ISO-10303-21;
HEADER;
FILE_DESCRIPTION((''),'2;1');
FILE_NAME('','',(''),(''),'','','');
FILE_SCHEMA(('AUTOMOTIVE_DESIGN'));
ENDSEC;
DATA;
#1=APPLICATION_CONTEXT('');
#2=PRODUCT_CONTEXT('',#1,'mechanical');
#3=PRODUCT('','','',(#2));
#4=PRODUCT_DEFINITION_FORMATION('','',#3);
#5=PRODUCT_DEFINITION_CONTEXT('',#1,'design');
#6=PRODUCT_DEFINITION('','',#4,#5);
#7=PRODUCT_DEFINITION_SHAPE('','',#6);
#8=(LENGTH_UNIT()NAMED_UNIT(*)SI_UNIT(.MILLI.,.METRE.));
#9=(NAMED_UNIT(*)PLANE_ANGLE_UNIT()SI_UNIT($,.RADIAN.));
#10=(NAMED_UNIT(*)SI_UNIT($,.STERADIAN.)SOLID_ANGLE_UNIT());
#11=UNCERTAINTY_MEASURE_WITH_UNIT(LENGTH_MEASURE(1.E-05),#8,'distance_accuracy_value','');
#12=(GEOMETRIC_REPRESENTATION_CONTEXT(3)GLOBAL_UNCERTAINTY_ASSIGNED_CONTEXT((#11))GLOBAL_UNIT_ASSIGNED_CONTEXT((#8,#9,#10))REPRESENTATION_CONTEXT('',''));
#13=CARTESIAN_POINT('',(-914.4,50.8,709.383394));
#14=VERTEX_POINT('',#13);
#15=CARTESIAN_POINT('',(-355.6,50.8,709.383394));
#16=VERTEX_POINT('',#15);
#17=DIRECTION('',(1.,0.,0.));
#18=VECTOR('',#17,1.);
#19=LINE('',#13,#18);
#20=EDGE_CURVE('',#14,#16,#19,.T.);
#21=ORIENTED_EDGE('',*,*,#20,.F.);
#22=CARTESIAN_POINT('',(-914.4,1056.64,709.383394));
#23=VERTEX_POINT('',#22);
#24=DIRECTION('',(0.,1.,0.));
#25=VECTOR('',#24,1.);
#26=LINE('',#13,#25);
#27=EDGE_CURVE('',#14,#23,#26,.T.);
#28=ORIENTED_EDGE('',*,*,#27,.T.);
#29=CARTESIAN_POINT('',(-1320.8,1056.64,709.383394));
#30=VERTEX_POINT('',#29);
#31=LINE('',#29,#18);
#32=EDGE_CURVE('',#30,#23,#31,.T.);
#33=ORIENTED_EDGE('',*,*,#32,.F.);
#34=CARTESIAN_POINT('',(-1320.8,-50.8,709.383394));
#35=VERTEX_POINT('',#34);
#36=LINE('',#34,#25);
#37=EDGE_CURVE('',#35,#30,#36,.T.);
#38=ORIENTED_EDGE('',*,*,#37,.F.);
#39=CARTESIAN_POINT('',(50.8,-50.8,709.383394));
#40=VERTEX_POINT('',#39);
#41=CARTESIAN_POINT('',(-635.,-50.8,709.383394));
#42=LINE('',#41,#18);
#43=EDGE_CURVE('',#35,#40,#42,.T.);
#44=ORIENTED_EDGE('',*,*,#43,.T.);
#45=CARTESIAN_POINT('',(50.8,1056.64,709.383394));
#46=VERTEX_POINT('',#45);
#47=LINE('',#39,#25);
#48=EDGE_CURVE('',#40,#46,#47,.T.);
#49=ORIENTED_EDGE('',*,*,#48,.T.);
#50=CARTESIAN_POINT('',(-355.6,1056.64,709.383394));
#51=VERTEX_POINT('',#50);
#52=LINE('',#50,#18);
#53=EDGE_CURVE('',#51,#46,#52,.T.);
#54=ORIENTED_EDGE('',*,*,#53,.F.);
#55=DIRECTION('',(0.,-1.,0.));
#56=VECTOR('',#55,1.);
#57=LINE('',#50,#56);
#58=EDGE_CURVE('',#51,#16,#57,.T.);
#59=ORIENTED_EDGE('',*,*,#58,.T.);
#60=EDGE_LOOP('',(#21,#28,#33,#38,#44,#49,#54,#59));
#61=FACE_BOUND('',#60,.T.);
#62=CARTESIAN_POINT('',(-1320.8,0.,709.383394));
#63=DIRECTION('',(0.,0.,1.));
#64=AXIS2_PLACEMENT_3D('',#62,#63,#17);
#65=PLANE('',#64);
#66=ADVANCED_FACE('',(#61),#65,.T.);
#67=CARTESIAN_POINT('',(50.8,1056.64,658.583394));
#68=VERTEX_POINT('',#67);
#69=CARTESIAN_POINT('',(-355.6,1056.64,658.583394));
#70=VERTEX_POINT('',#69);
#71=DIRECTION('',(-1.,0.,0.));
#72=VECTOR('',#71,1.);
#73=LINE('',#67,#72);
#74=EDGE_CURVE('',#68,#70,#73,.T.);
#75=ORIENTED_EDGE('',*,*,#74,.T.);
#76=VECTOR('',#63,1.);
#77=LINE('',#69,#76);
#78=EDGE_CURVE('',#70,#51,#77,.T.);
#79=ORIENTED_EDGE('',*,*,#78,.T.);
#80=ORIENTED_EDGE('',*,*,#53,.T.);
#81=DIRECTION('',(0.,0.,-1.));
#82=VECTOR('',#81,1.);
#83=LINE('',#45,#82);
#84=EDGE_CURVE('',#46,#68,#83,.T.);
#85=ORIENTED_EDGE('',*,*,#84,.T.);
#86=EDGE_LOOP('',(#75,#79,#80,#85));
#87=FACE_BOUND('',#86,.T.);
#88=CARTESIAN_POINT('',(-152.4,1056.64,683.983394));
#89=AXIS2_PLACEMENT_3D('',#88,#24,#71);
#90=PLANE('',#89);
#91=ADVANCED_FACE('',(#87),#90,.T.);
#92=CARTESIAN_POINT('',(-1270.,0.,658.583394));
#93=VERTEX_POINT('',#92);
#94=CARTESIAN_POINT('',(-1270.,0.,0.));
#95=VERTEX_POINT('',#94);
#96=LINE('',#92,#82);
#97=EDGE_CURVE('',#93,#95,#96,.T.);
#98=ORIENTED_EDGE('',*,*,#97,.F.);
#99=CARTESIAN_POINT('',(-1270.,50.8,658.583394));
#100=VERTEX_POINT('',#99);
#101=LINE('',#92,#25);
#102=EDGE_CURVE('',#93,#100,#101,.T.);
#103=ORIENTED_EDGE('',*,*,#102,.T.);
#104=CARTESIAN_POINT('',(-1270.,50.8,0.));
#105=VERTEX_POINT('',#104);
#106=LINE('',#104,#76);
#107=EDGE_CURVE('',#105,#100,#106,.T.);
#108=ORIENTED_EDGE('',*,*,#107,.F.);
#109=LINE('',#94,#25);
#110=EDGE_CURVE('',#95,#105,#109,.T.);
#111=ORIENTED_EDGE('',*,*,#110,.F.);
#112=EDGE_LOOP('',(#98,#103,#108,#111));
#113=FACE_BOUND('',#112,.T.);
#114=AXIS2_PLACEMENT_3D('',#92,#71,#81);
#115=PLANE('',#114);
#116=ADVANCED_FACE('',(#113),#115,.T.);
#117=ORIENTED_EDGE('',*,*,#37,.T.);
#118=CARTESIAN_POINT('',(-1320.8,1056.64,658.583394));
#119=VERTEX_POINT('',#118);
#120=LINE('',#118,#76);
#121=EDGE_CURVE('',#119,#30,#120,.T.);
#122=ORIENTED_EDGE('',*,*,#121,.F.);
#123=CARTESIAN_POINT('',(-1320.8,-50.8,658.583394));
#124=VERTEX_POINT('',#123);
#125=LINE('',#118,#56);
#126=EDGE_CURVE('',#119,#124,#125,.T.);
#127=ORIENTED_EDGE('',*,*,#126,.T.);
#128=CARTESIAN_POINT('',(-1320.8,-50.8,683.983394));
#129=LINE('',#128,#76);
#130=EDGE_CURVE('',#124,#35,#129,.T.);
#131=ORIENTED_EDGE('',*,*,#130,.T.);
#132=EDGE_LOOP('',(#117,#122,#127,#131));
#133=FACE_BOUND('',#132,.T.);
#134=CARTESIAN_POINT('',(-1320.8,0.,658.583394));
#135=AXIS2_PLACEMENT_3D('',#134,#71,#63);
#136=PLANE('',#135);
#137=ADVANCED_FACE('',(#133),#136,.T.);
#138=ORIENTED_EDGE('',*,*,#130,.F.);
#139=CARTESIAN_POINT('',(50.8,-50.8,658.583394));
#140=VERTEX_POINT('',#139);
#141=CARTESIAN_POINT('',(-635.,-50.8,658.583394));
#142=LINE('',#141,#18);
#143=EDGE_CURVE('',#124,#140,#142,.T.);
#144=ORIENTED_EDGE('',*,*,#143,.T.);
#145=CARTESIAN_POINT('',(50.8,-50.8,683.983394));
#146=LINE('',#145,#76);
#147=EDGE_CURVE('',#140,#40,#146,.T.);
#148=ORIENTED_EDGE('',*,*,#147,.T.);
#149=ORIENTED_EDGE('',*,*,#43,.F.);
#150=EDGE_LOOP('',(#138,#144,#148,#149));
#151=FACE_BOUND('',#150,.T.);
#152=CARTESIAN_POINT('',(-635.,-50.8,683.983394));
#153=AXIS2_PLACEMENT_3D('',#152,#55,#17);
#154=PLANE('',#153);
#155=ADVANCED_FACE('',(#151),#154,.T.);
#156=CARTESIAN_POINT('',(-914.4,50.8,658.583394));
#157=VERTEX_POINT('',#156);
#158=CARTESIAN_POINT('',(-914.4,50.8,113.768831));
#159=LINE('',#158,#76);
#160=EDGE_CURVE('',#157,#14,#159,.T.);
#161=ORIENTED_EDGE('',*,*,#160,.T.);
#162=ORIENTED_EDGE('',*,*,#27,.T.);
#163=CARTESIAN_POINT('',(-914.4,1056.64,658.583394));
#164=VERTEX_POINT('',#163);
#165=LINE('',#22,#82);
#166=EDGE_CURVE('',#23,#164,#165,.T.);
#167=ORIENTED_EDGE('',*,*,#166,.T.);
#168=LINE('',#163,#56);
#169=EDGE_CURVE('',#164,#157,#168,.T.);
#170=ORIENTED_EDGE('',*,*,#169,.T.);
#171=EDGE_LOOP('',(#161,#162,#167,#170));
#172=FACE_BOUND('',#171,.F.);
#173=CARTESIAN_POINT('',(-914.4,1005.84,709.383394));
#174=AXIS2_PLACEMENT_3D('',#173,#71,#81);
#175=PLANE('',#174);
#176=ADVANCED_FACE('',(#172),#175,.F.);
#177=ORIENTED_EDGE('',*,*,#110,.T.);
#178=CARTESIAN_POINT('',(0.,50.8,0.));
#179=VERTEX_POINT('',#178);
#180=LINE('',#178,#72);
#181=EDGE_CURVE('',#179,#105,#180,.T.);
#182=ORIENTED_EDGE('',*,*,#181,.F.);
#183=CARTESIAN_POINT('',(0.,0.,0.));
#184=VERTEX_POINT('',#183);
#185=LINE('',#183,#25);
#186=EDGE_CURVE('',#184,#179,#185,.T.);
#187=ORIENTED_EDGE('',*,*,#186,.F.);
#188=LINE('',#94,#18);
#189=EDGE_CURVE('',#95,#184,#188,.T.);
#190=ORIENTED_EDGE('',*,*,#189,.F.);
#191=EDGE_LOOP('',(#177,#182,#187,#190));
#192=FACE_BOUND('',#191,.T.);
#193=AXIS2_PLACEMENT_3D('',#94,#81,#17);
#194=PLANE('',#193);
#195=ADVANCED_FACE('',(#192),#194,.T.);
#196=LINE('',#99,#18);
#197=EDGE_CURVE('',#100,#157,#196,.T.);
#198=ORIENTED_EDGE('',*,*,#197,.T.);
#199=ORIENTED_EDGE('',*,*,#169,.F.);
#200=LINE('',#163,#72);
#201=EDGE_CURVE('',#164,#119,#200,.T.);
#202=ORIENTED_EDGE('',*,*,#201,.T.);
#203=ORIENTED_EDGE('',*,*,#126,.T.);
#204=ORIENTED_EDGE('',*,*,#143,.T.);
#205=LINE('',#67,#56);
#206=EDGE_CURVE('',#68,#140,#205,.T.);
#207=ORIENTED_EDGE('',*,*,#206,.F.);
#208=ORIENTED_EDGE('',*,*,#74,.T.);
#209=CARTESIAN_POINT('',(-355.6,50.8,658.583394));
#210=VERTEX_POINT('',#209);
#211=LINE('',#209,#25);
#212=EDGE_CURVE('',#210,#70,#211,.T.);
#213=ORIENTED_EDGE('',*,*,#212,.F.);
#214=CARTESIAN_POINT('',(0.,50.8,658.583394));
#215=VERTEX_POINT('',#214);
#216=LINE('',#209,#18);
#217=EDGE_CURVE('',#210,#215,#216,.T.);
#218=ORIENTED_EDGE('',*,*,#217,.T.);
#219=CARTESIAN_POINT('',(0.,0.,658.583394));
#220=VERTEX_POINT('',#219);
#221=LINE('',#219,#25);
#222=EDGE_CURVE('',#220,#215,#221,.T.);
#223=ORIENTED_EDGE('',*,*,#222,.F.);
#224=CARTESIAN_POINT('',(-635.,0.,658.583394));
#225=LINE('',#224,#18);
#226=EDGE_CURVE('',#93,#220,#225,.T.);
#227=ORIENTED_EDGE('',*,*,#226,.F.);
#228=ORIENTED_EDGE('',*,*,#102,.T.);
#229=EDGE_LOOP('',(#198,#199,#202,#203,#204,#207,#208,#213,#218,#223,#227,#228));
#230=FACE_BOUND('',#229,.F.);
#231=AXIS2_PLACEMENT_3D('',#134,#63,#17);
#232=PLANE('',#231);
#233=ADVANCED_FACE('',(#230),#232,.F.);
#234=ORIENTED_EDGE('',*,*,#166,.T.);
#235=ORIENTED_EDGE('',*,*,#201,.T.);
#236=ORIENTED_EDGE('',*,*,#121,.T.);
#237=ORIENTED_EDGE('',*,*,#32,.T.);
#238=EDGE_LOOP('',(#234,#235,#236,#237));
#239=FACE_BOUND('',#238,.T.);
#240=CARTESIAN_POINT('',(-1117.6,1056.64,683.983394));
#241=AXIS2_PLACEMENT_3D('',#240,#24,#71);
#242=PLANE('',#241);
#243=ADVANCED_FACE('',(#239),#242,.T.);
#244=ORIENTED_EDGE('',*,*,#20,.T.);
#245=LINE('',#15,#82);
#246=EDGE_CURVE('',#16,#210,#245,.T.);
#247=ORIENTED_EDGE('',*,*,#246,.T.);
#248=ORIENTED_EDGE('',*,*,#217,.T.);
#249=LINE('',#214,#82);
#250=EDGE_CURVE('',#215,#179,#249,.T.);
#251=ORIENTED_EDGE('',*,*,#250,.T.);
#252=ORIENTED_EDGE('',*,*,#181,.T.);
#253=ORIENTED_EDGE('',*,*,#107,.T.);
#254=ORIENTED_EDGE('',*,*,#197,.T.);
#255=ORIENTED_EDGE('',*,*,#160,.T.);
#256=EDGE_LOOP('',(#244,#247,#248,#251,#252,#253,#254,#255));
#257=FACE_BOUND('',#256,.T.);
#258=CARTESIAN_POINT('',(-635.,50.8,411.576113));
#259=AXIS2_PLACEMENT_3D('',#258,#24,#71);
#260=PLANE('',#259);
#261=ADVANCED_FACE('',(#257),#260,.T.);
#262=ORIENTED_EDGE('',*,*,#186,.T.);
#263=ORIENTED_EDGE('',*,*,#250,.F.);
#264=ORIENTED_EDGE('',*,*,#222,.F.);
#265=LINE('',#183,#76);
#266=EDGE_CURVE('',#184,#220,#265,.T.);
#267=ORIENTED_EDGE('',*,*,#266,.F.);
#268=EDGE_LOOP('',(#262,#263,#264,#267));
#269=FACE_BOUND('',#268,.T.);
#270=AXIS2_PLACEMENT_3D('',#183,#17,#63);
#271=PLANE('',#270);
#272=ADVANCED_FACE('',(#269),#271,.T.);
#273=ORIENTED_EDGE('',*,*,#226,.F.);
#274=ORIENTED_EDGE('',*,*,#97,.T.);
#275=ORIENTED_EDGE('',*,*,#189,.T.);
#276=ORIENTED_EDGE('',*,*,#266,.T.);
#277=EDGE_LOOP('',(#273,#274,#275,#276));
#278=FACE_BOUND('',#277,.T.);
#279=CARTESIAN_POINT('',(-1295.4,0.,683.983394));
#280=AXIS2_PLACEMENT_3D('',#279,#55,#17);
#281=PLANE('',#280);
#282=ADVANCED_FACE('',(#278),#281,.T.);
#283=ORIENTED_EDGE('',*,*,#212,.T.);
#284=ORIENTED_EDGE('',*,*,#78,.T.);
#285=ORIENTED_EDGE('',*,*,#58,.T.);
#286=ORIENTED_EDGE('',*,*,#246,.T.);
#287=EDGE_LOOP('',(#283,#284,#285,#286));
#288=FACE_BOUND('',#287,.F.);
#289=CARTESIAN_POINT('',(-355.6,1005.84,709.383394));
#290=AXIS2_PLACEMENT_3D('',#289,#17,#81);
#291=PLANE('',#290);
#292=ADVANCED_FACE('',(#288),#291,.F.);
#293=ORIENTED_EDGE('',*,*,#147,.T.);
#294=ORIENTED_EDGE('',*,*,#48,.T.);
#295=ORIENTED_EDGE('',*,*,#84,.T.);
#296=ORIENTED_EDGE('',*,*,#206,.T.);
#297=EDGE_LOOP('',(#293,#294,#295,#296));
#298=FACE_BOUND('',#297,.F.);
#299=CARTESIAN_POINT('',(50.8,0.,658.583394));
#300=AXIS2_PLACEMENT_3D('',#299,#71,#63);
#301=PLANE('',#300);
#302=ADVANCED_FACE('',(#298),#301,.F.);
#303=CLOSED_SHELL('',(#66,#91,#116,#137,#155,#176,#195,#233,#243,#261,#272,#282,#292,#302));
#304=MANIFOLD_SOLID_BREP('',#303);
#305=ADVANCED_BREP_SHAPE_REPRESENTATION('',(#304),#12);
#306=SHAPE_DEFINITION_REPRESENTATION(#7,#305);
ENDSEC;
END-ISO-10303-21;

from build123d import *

# Parameters (mm, degrees)
F0_W      = 50.8
F0_H      = 50.8
F1_DEPTH  = 1005.84
F3_DEPTH  = 50.8
F4_W      = 1371.6
F4_H      = 50.8
F5_DEPTH  = 50.8
F11_DEPTH = 955.04


# Not quite as in the source:
# - a feature of the source that left no trace in its solid (it failed there, or was rolled back) is left out


with BuildPart() as f1:
    # F0 (on Front) → F1 (new body)
    with BuildSketch(Plane.XZ):
        with Locations((-1295.4, 683.9833942235)):
            Rectangle(F0_W, F0_H)
        with Locations((25.4, 683.9833942235)):
            Rectangle(F0_W, F0_H)
        Polygon((-1270, 0), (0, 0), (0, 658.5833942235), (0, 709.3833942235), (-1270, 709.3833942235), (-1270, 658.5833942235), align=None)
    extrude(amount=-F1_DEPTH)

    # F2 (on face) → F3 (join)
    with BuildSketch(Plane(origin=(0, 1005.84, 0), x_dir=(-1, 0, 0), z_dir=(0, 1, 0))):
        Polygon((1320.8, 709.3833942235), (914.4, 709.3833942235), (914.4, 658.5833942235), (1270, 658.5833942235), (1320.8, 658.5833942235), align=None)
        Polygon((-50.8, 709.3833942235), (-50.8, 658.5833942235), (0, 658.5833942235), (355.6, 658.5833942235), (355.6, 709.3833942235), align=None)
    extrude(amount=F3_DEPTH)

    # F4 (on face) → F5 (join)
    with BuildSketch(Plane.XZ):
        with Locations((-635, 683.9833942235)):
            Rectangle(F4_W, F4_H)
    extrude(amount=F5_DEPTH)

    # F10 (on face) → F11 (cut)
    with BuildSketch(Plane(origin=(0, 1005.84, 0), x_dir=(-1, 0, 0), z_dir=(0, 1, 0))):
        Polygon((355.6, 709.3833942235), (355.6, 658.5833942235), (355.6, 113.7688308954), (914.4, 113.7688308954), (914.4, 658.5833942235), (914.4, 709.3833942235), align=None)
        Polygon((355.6, 113.7688308954), (355.6, 658.5833942235), (0, 658.5833942235), (0, 0), (1270, 0), (1270, 658.5833942235), (914.4, 658.5833942235), (914.4, 113.7688308954), align=None)
    extrude(amount=-F11_DEPTH, mode=Mode.SUBTRACT)


solid = f1.part
